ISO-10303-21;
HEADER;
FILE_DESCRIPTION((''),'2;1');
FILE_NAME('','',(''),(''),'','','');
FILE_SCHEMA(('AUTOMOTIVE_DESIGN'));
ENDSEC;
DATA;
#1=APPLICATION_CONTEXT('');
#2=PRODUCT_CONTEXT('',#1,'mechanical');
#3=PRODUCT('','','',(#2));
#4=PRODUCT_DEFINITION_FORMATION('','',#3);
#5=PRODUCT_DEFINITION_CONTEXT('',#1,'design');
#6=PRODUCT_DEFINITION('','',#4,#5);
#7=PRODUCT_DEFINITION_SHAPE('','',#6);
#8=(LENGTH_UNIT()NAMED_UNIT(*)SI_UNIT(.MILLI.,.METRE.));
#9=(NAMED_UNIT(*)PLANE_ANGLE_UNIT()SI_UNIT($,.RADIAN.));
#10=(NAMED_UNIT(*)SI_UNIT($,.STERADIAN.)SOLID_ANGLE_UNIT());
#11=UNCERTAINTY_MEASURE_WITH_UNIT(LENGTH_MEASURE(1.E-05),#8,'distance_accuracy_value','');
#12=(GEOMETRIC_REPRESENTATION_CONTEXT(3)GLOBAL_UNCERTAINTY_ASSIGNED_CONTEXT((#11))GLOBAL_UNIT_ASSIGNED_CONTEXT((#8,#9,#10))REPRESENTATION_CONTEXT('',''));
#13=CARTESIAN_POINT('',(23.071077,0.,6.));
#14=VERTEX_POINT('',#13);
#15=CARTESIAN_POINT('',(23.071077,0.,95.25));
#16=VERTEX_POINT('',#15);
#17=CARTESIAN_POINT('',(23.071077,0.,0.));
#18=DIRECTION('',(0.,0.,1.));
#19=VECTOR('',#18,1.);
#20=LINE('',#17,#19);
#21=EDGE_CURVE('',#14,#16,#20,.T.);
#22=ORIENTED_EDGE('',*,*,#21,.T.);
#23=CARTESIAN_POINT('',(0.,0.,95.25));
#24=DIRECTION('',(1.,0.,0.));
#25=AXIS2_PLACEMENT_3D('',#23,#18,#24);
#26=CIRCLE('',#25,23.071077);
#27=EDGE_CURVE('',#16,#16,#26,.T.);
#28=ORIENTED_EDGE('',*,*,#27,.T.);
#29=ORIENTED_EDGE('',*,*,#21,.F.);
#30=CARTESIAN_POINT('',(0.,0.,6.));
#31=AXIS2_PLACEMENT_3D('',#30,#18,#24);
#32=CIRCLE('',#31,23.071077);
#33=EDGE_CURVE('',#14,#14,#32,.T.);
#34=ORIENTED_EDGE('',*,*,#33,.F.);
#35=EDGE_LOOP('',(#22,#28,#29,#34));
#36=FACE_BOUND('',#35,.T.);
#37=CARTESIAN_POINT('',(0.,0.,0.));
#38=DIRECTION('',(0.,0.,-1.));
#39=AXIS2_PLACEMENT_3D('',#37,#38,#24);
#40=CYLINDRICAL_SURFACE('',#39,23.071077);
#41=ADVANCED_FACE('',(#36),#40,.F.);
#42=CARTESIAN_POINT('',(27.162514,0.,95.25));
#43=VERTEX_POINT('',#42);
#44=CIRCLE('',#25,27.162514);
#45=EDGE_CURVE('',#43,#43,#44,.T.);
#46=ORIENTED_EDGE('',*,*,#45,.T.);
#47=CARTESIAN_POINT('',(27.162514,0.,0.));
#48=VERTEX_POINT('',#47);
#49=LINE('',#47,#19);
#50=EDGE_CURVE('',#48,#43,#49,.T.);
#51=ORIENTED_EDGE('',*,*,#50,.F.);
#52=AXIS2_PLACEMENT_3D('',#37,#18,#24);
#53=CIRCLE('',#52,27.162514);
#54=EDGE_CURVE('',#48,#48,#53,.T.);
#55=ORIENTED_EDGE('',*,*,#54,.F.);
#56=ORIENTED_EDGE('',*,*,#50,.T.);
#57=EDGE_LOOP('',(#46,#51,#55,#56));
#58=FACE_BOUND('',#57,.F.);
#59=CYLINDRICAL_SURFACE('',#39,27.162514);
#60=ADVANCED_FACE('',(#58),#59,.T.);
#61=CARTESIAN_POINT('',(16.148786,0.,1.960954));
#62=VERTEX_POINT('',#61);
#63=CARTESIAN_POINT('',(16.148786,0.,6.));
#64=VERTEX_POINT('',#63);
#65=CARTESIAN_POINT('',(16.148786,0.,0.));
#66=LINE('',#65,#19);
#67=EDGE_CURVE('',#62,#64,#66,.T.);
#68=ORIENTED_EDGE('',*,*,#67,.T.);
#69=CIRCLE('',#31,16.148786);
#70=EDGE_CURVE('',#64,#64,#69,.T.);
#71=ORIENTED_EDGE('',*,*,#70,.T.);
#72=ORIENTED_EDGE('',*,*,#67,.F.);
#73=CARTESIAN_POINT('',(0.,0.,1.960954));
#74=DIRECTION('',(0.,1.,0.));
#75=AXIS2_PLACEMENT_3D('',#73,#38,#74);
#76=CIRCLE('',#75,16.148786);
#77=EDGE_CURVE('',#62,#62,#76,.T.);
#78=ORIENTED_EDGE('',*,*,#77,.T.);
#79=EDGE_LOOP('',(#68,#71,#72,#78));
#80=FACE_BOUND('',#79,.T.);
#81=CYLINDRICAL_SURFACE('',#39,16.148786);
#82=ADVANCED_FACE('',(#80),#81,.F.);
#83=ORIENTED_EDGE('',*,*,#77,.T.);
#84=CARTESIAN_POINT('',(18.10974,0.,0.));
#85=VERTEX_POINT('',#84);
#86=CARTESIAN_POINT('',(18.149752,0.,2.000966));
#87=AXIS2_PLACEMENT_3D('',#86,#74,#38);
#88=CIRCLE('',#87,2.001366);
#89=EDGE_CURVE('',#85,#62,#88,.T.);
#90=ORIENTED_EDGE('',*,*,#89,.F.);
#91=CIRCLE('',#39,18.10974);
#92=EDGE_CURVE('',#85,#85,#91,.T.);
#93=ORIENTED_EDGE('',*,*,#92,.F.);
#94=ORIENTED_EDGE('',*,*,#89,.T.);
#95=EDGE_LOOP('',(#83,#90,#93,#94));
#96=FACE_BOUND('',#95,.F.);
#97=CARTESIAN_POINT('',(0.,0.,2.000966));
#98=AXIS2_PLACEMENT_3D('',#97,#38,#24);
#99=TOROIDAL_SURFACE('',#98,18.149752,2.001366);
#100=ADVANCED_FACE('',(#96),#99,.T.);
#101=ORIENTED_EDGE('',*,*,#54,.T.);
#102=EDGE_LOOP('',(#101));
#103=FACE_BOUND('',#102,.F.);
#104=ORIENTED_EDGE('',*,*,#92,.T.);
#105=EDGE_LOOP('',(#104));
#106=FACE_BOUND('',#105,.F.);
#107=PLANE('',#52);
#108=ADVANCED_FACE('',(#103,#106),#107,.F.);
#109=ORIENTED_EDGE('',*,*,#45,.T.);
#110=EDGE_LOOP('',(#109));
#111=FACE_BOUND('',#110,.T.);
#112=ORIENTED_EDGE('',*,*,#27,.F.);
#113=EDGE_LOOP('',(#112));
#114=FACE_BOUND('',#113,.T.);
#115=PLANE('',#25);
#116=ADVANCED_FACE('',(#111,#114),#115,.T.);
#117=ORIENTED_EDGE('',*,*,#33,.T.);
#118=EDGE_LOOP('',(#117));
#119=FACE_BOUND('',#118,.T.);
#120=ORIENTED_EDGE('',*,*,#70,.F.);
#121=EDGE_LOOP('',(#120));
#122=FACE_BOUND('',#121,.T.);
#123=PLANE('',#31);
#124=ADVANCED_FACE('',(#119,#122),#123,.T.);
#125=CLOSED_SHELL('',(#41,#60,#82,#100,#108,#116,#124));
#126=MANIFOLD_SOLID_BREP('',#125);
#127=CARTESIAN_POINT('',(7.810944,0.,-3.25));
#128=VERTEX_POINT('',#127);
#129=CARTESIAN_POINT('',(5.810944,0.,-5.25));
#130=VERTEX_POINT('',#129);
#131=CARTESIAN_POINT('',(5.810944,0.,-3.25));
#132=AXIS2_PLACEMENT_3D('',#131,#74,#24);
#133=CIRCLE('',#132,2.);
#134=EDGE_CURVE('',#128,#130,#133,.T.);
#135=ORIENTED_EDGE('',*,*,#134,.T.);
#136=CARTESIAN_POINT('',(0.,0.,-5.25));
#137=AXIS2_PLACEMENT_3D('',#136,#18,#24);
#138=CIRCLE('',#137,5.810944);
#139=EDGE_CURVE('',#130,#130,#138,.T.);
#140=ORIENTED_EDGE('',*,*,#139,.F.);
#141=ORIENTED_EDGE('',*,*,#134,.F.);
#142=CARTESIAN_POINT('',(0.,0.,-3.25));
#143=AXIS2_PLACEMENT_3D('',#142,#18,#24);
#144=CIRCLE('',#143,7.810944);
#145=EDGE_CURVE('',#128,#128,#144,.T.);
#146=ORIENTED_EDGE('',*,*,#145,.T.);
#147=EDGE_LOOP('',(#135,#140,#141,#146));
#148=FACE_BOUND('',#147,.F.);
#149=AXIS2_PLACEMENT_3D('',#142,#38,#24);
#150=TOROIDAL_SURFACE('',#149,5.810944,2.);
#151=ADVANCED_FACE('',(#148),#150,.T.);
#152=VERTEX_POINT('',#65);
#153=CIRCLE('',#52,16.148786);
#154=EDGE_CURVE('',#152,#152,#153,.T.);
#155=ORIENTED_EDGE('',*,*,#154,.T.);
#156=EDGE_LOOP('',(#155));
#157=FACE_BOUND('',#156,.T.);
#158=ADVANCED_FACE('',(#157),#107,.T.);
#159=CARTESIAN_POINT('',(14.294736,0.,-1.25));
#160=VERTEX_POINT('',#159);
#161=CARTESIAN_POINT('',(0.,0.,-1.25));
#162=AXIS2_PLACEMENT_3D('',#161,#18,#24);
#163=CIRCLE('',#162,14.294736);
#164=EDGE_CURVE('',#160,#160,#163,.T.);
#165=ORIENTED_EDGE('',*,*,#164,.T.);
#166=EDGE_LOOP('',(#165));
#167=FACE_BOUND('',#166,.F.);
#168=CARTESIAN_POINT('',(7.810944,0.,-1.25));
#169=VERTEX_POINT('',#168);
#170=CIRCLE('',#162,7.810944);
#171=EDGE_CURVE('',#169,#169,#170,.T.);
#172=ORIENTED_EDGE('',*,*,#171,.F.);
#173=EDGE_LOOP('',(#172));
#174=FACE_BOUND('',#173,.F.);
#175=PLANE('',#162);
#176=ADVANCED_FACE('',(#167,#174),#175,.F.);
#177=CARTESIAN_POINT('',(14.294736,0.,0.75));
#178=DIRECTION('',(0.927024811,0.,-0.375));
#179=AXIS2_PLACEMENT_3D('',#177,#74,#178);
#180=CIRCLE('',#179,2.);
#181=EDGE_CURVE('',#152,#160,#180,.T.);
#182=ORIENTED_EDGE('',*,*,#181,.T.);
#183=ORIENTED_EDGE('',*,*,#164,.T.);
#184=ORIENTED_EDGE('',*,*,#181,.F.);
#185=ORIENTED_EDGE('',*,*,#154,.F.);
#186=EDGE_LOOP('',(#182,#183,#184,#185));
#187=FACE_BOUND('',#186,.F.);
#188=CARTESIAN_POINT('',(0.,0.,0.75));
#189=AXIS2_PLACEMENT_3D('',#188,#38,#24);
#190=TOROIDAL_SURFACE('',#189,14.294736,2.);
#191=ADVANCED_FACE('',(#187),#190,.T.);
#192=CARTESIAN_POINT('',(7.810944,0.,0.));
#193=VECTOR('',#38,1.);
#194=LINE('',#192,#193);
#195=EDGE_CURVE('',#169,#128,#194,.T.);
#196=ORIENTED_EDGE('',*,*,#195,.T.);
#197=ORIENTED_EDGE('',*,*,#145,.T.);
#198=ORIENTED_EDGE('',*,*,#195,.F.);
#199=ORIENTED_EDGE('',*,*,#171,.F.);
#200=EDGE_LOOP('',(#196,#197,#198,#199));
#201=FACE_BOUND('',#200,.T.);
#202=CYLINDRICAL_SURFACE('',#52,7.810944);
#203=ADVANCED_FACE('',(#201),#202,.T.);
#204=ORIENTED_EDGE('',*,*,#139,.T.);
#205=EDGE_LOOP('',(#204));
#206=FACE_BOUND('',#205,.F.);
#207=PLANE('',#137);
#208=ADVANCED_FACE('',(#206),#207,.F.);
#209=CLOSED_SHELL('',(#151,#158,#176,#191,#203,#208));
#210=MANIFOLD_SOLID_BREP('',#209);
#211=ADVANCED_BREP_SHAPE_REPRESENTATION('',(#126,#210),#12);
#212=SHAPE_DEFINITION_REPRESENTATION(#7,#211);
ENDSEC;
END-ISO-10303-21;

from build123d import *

# Parameters (mm, degrees)
F0_R     = 27.1625137683
F0_R_2   = 23.071077157
F1_DEPTH = 95.25
F0_R_3   = 16.1487861192
F2_DEPTH = 6
F0_R_4   = 7.8109444868
F3_DEPTH = 1.25
F4_DEPTH = 5.25


# Not quite as in the source:
# - a fillet or chamfer that OpenCascade refuses, or shapes differently, is made with other operations: its cross-section is extruded or revolved along the edge and cut away or added


with BuildPart() as f1:
    # F0 (on Top) → F1 (new body)
    with BuildSketch(Plane.XY):
        Circle(F0_R)
        Circle(F0_R_2, mode=Mode.SUBTRACT)
    extrude(amount=F1_DEPTH)

    # F0 (on Top) → F2 (join)
    with BuildSketch(Plane.XY):
        Circle(F0_R_2)
        Circle(F0_R_3, mode=Mode.SUBTRACT)
    extrude(amount=F2_DEPTH)

    # F5: fillet of radius 2 on 1 edges, made by hand

    # F5_s1 → F5_t2 (revolve, cut)
    with BuildSketch(Plane.XZ):
        with BuildLine():
            ThreePointArc((18.1497518046, -0.0004), (16.7345725568, 0.5857864376), (16.1483861192, 2.0009656854))
            Line((16.1483861192, 2.0009656854), (15.9482495506, 2.0009656854))
            ThreePointArc((15.9482495506, 2.0009656854), (15.9486495506, 1.0004828427), (15.9486495506, 0))
            Line((15.9486495506, 0), (16.1487861192, -0.2001365685))
            ThreePointArc((16.1487861192, -0.2001365685), (17.1492689619, -0.2001365685), (18.1497518046, -0.2005365685))
            Line((18.1497518046, -0.2005365685), (18.1497518046, -0.0004))
        make_face()
    revolve(axis=Axis((0, 0, 0), (0, 0, 1)), mode=Mode.SUBTRACT)


with BuildPart() as f3:
    # F0 (on Top) → F3 (new body)
    with BuildSketch(Plane.XY):
        Circle(F0_R_3)
        Circle(F0_R_4, mode=Mode.SUBTRACT)
    extrude(amount=-F3_DEPTH)

    # F0 (on Top) → F4 (join)
    with BuildSketch(Plane.XY):
        Circle(F0_R_4)
    extrude(amount=-F4_DEPTH)

    # F5#2: fillet of radius 2 on 2 edges, made by hand

    # F5_2_s1 → F5_2_t2 (revolve, cut)
    with BuildSketch(Plane.XZ):
        with BuildLine():
            ThreePointArc((7.8109444868, -3.25), (7.2251580491, -4.6642135624), (5.8109444868, -5.25))
            Line((5.8109444868, -5.25), (7.8109444868, -5.25))
            Line((7.8109444868, -5.25), (7.8109444868, -3.25))
        make_face()
    revolve(axis=Axis((0, 0, -5.25), (0, 0, 1)), mode=Mode.SUBTRACT)

    # F5_2_s3 → F5_2_t4 (revolve, cut)
    with BuildSketch(Plane.XZ):
        with BuildLine():
            ThreePointArc((16.1487861192, 0), (15.4127704861, -0.9083123952), (14.2947364974, -1.25))
            Line((14.2947364974, -1.25), (16.1487861192, -1.25))
            Line((16.1487861192, -1.25), (16.1487861192, 0))
        make_face()
    revolve(axis=Axis((0, 0, -1.25), (0, 0, 1)), mode=Mode.SUBTRACT)


solid = Compound([f1.part, f3.part])
